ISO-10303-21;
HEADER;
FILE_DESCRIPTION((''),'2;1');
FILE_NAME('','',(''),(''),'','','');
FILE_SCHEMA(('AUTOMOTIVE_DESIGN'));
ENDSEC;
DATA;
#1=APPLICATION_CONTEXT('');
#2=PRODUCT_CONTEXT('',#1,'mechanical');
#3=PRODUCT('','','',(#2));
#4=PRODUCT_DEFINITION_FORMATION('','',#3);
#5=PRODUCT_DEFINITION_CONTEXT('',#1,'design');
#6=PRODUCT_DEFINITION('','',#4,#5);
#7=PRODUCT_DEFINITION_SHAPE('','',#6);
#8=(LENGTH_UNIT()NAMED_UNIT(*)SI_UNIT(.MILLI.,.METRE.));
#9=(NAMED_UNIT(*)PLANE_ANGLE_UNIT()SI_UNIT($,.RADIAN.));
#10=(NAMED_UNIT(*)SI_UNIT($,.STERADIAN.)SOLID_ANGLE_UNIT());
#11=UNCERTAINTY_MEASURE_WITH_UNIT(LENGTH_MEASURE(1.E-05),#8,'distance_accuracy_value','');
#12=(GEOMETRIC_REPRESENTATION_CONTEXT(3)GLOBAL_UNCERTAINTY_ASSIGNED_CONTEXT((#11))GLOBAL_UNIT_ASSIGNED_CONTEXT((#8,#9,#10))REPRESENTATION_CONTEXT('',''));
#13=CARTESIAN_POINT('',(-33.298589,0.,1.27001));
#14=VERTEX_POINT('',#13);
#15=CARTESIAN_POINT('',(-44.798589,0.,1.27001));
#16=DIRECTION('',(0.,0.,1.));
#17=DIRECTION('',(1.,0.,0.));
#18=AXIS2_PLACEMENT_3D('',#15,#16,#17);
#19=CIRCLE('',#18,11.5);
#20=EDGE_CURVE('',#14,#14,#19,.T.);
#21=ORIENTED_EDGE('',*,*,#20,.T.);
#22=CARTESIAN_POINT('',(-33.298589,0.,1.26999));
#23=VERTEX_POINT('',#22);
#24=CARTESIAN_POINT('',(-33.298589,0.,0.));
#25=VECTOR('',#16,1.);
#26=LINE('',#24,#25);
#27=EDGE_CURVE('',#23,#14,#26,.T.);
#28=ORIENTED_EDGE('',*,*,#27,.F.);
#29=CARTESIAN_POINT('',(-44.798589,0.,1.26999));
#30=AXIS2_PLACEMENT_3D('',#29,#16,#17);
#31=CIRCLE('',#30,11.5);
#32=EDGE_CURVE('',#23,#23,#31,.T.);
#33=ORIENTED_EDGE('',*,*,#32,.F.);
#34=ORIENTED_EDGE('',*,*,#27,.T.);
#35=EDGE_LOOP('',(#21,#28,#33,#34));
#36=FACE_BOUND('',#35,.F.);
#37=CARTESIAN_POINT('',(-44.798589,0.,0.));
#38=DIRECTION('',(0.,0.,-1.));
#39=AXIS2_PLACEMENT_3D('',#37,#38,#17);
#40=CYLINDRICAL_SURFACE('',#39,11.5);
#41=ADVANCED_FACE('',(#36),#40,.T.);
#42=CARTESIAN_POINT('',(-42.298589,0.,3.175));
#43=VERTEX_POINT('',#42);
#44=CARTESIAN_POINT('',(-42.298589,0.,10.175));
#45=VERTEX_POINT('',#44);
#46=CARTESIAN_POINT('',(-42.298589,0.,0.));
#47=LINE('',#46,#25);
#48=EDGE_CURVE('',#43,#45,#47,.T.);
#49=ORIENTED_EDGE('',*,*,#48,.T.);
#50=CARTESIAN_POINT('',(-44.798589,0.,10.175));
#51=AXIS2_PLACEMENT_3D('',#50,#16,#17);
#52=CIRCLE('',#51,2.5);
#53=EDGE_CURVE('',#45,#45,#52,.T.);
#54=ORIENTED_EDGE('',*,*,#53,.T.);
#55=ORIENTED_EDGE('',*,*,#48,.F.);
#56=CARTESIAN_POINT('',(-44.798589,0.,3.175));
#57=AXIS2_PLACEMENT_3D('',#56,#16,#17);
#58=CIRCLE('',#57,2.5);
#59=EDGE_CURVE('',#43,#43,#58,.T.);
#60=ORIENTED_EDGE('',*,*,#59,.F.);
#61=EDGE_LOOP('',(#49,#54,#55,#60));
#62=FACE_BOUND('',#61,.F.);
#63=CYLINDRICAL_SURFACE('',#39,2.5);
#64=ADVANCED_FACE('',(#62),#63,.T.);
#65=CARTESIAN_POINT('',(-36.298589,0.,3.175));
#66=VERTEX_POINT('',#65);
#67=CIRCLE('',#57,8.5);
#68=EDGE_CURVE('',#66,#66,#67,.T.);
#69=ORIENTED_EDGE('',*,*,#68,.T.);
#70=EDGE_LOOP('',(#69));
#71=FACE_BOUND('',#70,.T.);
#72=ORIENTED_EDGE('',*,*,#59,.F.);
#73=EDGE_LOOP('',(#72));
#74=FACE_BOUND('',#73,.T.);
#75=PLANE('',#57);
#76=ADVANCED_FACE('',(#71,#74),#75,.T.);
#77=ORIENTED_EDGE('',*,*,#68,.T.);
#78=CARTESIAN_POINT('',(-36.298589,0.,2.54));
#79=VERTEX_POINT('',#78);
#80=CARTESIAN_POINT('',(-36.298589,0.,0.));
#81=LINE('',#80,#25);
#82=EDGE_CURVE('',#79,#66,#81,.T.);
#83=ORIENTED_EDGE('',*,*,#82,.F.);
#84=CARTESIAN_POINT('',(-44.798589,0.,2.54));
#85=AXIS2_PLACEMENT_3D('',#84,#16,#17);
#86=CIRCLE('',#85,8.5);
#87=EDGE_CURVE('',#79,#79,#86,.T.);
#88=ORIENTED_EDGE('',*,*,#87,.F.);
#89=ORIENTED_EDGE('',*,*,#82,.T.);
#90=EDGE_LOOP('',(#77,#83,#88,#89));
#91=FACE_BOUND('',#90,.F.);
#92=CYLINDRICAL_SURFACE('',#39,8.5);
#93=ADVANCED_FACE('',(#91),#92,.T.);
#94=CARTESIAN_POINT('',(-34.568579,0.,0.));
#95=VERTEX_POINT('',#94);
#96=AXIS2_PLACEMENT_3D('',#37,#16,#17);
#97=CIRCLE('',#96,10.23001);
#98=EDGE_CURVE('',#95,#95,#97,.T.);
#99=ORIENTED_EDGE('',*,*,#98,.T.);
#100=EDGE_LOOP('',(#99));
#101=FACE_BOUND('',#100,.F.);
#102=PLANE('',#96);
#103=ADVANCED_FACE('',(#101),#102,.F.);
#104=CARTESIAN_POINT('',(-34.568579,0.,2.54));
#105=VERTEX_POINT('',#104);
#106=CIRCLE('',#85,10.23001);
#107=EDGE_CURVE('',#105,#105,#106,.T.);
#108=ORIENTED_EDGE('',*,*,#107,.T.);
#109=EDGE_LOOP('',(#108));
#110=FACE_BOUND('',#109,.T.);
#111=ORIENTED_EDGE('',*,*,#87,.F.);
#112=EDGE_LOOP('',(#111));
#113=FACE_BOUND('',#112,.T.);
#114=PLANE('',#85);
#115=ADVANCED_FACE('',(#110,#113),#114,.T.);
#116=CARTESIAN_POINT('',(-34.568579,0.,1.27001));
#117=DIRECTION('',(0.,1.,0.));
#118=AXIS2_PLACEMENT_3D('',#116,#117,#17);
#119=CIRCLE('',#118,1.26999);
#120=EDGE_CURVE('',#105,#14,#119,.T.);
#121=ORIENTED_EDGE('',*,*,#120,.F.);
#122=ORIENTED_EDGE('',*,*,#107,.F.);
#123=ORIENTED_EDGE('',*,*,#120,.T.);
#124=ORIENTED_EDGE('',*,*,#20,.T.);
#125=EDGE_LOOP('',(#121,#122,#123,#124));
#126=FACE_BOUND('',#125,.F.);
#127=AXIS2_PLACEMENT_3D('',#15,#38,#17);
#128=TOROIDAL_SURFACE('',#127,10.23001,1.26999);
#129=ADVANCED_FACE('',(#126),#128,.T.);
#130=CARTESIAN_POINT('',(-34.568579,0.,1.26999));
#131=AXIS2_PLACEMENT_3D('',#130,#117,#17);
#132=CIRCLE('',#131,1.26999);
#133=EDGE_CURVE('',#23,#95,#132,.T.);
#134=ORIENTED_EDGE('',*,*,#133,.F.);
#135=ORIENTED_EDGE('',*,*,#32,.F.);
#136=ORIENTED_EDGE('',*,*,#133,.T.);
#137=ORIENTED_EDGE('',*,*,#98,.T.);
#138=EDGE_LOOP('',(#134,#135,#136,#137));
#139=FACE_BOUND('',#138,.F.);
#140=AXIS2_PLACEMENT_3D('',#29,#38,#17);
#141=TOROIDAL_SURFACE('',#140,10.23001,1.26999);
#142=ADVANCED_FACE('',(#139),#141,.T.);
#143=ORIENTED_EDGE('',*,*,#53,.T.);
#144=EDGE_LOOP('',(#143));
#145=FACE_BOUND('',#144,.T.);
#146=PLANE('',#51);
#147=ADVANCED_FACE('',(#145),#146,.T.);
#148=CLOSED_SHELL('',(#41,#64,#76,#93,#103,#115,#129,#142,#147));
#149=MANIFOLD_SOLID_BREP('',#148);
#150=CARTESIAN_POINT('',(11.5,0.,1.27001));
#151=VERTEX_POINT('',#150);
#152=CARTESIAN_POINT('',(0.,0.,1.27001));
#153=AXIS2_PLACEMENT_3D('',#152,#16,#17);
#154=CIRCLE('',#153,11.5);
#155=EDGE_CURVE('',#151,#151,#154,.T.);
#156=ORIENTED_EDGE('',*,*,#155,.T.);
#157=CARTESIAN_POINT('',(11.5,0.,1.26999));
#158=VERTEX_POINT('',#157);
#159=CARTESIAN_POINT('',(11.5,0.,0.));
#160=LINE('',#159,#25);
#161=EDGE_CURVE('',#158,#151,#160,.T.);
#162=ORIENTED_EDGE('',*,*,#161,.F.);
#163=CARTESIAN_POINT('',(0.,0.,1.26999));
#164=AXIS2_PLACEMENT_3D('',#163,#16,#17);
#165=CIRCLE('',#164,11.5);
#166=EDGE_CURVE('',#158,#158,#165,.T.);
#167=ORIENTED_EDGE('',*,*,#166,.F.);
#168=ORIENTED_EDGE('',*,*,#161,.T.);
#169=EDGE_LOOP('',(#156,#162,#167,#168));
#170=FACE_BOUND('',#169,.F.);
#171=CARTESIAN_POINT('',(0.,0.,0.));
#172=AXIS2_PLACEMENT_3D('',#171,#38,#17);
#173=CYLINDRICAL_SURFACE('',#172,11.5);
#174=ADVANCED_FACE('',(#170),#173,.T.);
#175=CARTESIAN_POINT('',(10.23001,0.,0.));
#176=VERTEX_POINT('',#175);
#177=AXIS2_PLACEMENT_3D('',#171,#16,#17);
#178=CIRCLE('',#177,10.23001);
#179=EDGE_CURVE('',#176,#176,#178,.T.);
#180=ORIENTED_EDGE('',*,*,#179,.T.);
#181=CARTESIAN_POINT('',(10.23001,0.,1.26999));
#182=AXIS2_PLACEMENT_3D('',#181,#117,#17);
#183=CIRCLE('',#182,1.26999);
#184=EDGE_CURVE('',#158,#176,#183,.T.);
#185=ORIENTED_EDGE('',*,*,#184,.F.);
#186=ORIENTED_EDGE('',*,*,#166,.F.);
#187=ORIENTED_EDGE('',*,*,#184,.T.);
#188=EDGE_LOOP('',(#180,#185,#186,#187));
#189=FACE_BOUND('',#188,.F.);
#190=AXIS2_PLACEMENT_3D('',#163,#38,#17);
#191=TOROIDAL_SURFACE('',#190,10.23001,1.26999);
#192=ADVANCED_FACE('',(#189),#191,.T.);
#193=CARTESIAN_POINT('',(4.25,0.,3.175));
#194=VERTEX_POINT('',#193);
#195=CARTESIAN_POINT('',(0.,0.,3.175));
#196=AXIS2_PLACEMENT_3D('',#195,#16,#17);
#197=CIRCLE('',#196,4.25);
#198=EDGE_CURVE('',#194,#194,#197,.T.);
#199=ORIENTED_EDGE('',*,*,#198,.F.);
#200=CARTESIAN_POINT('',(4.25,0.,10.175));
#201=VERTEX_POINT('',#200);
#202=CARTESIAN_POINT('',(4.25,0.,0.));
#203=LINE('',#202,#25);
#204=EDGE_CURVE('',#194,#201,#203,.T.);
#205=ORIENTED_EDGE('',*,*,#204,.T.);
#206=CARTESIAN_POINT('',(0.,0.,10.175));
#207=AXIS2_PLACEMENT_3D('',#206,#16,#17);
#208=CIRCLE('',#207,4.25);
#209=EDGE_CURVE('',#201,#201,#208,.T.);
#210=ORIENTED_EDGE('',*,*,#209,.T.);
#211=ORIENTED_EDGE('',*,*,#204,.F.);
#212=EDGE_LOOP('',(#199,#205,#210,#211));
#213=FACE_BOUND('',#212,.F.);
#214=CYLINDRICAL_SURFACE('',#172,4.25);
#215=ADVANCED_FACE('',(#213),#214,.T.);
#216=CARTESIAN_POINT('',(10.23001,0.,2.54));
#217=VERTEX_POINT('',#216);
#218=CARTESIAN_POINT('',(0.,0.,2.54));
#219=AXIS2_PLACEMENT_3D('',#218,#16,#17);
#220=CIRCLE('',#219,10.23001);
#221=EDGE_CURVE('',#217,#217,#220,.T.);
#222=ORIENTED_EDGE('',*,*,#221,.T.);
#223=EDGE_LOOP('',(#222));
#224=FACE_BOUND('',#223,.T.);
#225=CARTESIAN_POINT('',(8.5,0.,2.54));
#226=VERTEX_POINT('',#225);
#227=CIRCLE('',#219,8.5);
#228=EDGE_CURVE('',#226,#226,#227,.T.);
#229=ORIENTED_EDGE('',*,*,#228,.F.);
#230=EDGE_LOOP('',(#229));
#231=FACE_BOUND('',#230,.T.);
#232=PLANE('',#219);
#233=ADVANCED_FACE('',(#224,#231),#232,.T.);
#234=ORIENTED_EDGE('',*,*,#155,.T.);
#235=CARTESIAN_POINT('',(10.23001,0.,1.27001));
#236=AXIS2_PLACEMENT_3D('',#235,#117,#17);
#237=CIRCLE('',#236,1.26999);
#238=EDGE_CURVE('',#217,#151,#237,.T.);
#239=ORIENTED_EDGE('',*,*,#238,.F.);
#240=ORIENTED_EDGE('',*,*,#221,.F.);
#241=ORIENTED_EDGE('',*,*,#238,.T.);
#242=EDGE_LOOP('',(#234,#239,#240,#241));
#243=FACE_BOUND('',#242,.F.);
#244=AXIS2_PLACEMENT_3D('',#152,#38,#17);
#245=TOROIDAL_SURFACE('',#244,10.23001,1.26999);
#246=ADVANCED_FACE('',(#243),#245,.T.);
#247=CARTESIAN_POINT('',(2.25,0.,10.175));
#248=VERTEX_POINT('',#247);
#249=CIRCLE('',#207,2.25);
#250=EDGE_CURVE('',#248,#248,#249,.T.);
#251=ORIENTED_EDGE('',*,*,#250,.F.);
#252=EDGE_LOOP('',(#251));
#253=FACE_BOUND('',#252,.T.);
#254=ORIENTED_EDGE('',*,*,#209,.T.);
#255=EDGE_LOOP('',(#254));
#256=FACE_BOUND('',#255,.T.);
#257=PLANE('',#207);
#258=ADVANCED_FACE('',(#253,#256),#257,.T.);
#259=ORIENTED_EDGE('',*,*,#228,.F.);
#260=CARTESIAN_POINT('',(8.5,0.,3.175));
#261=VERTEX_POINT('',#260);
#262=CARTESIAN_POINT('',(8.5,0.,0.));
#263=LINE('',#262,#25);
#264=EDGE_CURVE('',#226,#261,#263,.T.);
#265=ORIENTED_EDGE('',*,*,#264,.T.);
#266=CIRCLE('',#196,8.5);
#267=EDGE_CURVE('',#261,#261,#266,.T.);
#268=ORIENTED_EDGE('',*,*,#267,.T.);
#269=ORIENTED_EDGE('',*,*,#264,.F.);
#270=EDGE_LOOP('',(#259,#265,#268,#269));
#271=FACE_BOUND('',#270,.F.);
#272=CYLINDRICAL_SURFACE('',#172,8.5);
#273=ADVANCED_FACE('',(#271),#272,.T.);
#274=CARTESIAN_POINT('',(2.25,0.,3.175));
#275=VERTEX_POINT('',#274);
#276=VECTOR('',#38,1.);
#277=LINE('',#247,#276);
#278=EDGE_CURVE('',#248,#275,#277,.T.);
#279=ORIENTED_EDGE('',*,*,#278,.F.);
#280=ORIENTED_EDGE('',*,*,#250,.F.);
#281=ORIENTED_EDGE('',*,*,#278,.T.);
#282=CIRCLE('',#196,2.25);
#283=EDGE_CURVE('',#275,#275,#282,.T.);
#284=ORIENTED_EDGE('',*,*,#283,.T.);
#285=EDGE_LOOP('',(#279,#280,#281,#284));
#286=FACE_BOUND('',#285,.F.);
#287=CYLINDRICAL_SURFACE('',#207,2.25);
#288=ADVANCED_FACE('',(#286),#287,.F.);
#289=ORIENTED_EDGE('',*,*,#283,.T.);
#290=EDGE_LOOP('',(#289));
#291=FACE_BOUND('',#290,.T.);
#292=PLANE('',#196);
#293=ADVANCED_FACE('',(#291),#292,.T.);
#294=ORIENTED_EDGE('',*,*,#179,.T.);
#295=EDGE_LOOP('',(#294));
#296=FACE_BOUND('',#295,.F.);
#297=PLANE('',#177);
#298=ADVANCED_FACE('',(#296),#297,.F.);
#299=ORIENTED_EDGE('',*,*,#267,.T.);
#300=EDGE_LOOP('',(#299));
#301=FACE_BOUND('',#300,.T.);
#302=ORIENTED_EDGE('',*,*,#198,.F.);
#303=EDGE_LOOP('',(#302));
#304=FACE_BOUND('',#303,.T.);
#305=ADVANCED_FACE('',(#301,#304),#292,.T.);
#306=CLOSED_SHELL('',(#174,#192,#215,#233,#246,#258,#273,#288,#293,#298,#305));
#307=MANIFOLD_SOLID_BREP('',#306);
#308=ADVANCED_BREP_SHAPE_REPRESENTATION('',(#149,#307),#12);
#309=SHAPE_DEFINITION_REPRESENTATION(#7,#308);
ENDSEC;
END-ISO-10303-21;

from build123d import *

# Parameters (mm, degrees)
F0_R      = 11.5
F0_R_2    = 8.5
F1_DEPTH  = 2.54
F0_R_3    = 4.25
F2_DEPTH  = 3.175
F3_DEPTH  = 10.175
F4_R      = 1.26999
F5_R      = 11.5
F5_R_2    = 8.5
F6_DEPTH  = 2.54
F5_R_3    = 2.5
F7_DEPTH  = 3.175
F8_DEPTH  = 10.175
F9_R      = 2.25
F10_DEPTH = 7
F11_R     = 1.26999


# Not quite as in the source:
# - a fillet or chamfer is up to 0.001 mm smaller than in the source, because OpenCascade refuses the exact size


with BuildPart() as f1:
    # F0 (on Top) → F1 (new body)
    with BuildSketch(Plane.XY):
        Circle(F0_R)
        Circle(F0_R_2, mode=Mode.SUBTRACT)
    extrude(amount=F1_DEPTH)

    # F0 (on Top) → F2 (join)
    with BuildSketch(Plane.XY):
        Circle(F0_R_2)
        Circle(F0_R_3, mode=Mode.SUBTRACT)
    extrude(amount=F2_DEPTH)

    # F0 (on Top) → F3 (join)
    with BuildSketch(Plane.XY):
        Circle(F0_R_3)
    extrude(amount=F3_DEPTH)

    # F4 (radius 1.27 in the source; OpenCascade refuses exactly that, so slightly less here)
    f4_edges = [f1.edges().sort_by_distance(p)[0] for p in [
        (-11.5, 0, 2.54),
        (-11.5, 0, 0),
    ]]
    fillet(f4_edges, radius=F4_R)

    # F9 (on face) → F10 (cut)
    with BuildSketch(Plane.XY.offset(10.175)):
        Circle(F9_R)
    extrude(amount=-F10_DEPTH, mode=Mode.SUBTRACT)


with BuildPart() as f6:
    # F5 (on Top) → F6 (new body)
    with BuildSketch(Plane.XY):
        with Locations((-44.7985892718, 0)):
            Circle(F5_R)
        with Locations((-44.7985892718, 0)):
            Circle(F5_R_2, mode=Mode.SUBTRACT)
    extrude(amount=F6_DEPTH)

    # F5 (on Top) → F7 (join)
    with BuildSketch(Plane.XY):
        with Locations((-44.7985892718, 0)):
            Circle(F5_R_2)
        with Locations((-44.7985892718, 0)):
            Circle(F5_R_3, mode=Mode.SUBTRACT)
    extrude(amount=F7_DEPTH)

    # F5 (on Top) → F8 (join)
    with BuildSketch(Plane.XY):
        with Locations((-44.7985892718, 0)):
            Circle(F5_R_3)
    extrude(amount=F8_DEPTH)

    # F11 (radius 1.27 in the source; OpenCascade refuses exactly that, so slightly less here)
    f11_edges = [f6.edges().sort_by_distance(p)[0] for p in [
        (-56.298589, 0, 2.54),
        (-56.298589, 0, 0),
    ]]
    fillet(f11_edges, radius=F11_R)


solid = Compound([f1.part, f6.part])
